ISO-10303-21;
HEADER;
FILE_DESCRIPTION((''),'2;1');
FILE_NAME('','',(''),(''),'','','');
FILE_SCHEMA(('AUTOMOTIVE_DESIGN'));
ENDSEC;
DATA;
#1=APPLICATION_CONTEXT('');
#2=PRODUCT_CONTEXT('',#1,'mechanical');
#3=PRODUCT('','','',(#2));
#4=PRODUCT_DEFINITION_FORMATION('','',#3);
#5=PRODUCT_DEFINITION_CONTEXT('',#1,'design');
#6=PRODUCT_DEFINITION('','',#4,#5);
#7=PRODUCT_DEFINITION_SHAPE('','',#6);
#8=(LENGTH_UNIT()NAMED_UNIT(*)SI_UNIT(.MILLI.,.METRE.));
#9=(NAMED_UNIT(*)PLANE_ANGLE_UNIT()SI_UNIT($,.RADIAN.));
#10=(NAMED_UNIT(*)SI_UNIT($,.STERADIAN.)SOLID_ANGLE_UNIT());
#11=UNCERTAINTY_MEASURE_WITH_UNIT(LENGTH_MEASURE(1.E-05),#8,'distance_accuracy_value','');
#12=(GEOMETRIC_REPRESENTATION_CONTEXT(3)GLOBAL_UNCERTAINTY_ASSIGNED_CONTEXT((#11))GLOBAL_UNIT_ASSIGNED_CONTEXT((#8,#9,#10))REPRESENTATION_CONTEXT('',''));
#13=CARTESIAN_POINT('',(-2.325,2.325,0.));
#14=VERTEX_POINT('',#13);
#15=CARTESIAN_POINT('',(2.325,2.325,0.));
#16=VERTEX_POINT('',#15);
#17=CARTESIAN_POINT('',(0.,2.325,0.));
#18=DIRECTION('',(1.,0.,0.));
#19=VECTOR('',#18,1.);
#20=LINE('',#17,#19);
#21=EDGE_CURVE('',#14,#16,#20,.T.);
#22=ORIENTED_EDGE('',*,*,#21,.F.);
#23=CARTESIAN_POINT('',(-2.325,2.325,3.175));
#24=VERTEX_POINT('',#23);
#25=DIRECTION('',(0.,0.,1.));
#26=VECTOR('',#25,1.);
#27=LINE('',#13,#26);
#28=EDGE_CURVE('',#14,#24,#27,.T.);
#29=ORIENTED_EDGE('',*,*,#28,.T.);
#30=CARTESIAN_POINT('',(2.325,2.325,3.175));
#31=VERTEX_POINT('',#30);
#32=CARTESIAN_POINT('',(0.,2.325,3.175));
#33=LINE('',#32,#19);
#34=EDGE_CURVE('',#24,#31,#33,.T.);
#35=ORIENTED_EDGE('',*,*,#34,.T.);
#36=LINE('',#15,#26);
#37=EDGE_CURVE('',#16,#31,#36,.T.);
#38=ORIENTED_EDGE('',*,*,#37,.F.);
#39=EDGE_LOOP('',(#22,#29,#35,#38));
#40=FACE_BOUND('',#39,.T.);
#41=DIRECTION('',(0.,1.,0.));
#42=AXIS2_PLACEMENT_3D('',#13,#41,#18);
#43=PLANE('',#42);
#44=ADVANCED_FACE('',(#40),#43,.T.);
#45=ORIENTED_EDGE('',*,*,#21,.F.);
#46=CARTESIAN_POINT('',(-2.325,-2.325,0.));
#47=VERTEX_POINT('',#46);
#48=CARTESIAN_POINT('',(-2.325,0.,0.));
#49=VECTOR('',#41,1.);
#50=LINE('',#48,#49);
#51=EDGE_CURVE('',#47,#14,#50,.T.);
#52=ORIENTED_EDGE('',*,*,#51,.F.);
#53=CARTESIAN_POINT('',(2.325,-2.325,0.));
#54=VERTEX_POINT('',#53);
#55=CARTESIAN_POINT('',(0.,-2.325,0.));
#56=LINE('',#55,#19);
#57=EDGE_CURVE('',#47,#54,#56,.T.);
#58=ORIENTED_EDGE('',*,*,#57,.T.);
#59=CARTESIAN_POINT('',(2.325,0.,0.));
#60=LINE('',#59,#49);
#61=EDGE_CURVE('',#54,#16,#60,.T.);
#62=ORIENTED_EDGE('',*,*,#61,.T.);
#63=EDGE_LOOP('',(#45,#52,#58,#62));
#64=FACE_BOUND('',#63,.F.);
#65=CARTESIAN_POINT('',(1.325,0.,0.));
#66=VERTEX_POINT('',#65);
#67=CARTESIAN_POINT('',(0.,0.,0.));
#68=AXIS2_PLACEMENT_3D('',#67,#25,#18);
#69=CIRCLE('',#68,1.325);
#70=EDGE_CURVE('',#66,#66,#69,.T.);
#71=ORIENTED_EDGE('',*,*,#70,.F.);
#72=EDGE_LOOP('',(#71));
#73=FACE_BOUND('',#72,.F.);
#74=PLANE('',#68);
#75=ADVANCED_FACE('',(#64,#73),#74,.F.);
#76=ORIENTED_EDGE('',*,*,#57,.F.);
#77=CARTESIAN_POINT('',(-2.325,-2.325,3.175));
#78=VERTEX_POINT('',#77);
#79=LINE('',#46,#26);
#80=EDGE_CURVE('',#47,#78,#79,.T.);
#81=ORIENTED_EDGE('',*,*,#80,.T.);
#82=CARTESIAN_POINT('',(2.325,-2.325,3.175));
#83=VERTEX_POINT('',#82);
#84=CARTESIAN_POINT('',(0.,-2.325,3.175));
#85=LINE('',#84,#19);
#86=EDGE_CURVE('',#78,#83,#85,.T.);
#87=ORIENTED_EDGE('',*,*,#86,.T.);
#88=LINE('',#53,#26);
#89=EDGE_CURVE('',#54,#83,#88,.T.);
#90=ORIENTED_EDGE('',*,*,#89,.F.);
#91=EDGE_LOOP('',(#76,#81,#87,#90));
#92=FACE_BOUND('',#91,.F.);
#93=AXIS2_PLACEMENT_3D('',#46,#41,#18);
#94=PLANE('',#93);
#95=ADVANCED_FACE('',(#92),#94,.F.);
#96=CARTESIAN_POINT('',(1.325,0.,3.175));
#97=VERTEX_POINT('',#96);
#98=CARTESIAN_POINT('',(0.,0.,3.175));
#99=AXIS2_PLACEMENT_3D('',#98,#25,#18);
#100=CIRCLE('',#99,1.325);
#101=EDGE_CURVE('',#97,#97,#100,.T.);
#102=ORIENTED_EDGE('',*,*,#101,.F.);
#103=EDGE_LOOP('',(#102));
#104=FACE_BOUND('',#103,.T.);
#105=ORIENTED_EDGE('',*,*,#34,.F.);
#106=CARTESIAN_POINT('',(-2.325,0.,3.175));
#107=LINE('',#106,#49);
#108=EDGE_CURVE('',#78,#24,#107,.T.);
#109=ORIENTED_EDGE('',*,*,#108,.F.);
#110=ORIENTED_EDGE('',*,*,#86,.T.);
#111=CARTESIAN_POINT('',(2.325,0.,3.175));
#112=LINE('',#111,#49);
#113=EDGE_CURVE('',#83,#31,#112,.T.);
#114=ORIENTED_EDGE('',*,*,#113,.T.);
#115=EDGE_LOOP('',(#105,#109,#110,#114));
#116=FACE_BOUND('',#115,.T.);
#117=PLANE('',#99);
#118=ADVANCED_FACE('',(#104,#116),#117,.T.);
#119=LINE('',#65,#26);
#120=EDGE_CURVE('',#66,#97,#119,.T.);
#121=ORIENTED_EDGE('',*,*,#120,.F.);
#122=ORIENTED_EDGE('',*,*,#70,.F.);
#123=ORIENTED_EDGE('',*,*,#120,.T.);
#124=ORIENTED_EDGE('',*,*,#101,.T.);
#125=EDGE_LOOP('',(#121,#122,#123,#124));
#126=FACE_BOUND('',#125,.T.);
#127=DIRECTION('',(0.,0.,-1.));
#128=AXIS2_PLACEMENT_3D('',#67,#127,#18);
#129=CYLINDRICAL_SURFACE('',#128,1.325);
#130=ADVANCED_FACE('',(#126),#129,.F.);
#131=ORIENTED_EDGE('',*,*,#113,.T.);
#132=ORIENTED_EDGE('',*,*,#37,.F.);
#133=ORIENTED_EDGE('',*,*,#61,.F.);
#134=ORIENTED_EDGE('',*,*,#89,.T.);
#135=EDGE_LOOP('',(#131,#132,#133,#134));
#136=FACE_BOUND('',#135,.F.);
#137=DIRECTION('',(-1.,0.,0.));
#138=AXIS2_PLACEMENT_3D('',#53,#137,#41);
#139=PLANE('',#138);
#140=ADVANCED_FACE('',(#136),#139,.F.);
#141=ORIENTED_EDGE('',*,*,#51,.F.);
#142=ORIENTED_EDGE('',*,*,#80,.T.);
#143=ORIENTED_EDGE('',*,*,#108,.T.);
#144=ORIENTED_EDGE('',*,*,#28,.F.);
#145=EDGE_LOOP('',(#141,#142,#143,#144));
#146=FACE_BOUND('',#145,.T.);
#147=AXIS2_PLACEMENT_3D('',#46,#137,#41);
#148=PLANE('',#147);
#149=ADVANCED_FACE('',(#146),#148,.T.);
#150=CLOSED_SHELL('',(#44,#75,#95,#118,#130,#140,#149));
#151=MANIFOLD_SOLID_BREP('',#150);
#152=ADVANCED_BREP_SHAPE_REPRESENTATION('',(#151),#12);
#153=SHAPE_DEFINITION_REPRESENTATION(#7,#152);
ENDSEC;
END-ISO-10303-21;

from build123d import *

# Parameters (mm, degrees)
F0_W     = 4.65
F0_H     = 4.65
F0_R     = 1.325
F1_DEPTH = 3.175


# Not quite as in the source:
# - a length typed as a fraction of an inch, garbled in the dataset ("3 / 203.2 mm" for 3/8 in), is restored


with BuildPart() as f1:
    # F0 (on Top) → F1 (new body)
    with BuildSketch(Plane.XY):
        Rectangle(F0_W, F0_H)
        Circle(F0_R, mode=Mode.SUBTRACT)
    extrude(amount=F1_DEPTH)


solid = f1.part
